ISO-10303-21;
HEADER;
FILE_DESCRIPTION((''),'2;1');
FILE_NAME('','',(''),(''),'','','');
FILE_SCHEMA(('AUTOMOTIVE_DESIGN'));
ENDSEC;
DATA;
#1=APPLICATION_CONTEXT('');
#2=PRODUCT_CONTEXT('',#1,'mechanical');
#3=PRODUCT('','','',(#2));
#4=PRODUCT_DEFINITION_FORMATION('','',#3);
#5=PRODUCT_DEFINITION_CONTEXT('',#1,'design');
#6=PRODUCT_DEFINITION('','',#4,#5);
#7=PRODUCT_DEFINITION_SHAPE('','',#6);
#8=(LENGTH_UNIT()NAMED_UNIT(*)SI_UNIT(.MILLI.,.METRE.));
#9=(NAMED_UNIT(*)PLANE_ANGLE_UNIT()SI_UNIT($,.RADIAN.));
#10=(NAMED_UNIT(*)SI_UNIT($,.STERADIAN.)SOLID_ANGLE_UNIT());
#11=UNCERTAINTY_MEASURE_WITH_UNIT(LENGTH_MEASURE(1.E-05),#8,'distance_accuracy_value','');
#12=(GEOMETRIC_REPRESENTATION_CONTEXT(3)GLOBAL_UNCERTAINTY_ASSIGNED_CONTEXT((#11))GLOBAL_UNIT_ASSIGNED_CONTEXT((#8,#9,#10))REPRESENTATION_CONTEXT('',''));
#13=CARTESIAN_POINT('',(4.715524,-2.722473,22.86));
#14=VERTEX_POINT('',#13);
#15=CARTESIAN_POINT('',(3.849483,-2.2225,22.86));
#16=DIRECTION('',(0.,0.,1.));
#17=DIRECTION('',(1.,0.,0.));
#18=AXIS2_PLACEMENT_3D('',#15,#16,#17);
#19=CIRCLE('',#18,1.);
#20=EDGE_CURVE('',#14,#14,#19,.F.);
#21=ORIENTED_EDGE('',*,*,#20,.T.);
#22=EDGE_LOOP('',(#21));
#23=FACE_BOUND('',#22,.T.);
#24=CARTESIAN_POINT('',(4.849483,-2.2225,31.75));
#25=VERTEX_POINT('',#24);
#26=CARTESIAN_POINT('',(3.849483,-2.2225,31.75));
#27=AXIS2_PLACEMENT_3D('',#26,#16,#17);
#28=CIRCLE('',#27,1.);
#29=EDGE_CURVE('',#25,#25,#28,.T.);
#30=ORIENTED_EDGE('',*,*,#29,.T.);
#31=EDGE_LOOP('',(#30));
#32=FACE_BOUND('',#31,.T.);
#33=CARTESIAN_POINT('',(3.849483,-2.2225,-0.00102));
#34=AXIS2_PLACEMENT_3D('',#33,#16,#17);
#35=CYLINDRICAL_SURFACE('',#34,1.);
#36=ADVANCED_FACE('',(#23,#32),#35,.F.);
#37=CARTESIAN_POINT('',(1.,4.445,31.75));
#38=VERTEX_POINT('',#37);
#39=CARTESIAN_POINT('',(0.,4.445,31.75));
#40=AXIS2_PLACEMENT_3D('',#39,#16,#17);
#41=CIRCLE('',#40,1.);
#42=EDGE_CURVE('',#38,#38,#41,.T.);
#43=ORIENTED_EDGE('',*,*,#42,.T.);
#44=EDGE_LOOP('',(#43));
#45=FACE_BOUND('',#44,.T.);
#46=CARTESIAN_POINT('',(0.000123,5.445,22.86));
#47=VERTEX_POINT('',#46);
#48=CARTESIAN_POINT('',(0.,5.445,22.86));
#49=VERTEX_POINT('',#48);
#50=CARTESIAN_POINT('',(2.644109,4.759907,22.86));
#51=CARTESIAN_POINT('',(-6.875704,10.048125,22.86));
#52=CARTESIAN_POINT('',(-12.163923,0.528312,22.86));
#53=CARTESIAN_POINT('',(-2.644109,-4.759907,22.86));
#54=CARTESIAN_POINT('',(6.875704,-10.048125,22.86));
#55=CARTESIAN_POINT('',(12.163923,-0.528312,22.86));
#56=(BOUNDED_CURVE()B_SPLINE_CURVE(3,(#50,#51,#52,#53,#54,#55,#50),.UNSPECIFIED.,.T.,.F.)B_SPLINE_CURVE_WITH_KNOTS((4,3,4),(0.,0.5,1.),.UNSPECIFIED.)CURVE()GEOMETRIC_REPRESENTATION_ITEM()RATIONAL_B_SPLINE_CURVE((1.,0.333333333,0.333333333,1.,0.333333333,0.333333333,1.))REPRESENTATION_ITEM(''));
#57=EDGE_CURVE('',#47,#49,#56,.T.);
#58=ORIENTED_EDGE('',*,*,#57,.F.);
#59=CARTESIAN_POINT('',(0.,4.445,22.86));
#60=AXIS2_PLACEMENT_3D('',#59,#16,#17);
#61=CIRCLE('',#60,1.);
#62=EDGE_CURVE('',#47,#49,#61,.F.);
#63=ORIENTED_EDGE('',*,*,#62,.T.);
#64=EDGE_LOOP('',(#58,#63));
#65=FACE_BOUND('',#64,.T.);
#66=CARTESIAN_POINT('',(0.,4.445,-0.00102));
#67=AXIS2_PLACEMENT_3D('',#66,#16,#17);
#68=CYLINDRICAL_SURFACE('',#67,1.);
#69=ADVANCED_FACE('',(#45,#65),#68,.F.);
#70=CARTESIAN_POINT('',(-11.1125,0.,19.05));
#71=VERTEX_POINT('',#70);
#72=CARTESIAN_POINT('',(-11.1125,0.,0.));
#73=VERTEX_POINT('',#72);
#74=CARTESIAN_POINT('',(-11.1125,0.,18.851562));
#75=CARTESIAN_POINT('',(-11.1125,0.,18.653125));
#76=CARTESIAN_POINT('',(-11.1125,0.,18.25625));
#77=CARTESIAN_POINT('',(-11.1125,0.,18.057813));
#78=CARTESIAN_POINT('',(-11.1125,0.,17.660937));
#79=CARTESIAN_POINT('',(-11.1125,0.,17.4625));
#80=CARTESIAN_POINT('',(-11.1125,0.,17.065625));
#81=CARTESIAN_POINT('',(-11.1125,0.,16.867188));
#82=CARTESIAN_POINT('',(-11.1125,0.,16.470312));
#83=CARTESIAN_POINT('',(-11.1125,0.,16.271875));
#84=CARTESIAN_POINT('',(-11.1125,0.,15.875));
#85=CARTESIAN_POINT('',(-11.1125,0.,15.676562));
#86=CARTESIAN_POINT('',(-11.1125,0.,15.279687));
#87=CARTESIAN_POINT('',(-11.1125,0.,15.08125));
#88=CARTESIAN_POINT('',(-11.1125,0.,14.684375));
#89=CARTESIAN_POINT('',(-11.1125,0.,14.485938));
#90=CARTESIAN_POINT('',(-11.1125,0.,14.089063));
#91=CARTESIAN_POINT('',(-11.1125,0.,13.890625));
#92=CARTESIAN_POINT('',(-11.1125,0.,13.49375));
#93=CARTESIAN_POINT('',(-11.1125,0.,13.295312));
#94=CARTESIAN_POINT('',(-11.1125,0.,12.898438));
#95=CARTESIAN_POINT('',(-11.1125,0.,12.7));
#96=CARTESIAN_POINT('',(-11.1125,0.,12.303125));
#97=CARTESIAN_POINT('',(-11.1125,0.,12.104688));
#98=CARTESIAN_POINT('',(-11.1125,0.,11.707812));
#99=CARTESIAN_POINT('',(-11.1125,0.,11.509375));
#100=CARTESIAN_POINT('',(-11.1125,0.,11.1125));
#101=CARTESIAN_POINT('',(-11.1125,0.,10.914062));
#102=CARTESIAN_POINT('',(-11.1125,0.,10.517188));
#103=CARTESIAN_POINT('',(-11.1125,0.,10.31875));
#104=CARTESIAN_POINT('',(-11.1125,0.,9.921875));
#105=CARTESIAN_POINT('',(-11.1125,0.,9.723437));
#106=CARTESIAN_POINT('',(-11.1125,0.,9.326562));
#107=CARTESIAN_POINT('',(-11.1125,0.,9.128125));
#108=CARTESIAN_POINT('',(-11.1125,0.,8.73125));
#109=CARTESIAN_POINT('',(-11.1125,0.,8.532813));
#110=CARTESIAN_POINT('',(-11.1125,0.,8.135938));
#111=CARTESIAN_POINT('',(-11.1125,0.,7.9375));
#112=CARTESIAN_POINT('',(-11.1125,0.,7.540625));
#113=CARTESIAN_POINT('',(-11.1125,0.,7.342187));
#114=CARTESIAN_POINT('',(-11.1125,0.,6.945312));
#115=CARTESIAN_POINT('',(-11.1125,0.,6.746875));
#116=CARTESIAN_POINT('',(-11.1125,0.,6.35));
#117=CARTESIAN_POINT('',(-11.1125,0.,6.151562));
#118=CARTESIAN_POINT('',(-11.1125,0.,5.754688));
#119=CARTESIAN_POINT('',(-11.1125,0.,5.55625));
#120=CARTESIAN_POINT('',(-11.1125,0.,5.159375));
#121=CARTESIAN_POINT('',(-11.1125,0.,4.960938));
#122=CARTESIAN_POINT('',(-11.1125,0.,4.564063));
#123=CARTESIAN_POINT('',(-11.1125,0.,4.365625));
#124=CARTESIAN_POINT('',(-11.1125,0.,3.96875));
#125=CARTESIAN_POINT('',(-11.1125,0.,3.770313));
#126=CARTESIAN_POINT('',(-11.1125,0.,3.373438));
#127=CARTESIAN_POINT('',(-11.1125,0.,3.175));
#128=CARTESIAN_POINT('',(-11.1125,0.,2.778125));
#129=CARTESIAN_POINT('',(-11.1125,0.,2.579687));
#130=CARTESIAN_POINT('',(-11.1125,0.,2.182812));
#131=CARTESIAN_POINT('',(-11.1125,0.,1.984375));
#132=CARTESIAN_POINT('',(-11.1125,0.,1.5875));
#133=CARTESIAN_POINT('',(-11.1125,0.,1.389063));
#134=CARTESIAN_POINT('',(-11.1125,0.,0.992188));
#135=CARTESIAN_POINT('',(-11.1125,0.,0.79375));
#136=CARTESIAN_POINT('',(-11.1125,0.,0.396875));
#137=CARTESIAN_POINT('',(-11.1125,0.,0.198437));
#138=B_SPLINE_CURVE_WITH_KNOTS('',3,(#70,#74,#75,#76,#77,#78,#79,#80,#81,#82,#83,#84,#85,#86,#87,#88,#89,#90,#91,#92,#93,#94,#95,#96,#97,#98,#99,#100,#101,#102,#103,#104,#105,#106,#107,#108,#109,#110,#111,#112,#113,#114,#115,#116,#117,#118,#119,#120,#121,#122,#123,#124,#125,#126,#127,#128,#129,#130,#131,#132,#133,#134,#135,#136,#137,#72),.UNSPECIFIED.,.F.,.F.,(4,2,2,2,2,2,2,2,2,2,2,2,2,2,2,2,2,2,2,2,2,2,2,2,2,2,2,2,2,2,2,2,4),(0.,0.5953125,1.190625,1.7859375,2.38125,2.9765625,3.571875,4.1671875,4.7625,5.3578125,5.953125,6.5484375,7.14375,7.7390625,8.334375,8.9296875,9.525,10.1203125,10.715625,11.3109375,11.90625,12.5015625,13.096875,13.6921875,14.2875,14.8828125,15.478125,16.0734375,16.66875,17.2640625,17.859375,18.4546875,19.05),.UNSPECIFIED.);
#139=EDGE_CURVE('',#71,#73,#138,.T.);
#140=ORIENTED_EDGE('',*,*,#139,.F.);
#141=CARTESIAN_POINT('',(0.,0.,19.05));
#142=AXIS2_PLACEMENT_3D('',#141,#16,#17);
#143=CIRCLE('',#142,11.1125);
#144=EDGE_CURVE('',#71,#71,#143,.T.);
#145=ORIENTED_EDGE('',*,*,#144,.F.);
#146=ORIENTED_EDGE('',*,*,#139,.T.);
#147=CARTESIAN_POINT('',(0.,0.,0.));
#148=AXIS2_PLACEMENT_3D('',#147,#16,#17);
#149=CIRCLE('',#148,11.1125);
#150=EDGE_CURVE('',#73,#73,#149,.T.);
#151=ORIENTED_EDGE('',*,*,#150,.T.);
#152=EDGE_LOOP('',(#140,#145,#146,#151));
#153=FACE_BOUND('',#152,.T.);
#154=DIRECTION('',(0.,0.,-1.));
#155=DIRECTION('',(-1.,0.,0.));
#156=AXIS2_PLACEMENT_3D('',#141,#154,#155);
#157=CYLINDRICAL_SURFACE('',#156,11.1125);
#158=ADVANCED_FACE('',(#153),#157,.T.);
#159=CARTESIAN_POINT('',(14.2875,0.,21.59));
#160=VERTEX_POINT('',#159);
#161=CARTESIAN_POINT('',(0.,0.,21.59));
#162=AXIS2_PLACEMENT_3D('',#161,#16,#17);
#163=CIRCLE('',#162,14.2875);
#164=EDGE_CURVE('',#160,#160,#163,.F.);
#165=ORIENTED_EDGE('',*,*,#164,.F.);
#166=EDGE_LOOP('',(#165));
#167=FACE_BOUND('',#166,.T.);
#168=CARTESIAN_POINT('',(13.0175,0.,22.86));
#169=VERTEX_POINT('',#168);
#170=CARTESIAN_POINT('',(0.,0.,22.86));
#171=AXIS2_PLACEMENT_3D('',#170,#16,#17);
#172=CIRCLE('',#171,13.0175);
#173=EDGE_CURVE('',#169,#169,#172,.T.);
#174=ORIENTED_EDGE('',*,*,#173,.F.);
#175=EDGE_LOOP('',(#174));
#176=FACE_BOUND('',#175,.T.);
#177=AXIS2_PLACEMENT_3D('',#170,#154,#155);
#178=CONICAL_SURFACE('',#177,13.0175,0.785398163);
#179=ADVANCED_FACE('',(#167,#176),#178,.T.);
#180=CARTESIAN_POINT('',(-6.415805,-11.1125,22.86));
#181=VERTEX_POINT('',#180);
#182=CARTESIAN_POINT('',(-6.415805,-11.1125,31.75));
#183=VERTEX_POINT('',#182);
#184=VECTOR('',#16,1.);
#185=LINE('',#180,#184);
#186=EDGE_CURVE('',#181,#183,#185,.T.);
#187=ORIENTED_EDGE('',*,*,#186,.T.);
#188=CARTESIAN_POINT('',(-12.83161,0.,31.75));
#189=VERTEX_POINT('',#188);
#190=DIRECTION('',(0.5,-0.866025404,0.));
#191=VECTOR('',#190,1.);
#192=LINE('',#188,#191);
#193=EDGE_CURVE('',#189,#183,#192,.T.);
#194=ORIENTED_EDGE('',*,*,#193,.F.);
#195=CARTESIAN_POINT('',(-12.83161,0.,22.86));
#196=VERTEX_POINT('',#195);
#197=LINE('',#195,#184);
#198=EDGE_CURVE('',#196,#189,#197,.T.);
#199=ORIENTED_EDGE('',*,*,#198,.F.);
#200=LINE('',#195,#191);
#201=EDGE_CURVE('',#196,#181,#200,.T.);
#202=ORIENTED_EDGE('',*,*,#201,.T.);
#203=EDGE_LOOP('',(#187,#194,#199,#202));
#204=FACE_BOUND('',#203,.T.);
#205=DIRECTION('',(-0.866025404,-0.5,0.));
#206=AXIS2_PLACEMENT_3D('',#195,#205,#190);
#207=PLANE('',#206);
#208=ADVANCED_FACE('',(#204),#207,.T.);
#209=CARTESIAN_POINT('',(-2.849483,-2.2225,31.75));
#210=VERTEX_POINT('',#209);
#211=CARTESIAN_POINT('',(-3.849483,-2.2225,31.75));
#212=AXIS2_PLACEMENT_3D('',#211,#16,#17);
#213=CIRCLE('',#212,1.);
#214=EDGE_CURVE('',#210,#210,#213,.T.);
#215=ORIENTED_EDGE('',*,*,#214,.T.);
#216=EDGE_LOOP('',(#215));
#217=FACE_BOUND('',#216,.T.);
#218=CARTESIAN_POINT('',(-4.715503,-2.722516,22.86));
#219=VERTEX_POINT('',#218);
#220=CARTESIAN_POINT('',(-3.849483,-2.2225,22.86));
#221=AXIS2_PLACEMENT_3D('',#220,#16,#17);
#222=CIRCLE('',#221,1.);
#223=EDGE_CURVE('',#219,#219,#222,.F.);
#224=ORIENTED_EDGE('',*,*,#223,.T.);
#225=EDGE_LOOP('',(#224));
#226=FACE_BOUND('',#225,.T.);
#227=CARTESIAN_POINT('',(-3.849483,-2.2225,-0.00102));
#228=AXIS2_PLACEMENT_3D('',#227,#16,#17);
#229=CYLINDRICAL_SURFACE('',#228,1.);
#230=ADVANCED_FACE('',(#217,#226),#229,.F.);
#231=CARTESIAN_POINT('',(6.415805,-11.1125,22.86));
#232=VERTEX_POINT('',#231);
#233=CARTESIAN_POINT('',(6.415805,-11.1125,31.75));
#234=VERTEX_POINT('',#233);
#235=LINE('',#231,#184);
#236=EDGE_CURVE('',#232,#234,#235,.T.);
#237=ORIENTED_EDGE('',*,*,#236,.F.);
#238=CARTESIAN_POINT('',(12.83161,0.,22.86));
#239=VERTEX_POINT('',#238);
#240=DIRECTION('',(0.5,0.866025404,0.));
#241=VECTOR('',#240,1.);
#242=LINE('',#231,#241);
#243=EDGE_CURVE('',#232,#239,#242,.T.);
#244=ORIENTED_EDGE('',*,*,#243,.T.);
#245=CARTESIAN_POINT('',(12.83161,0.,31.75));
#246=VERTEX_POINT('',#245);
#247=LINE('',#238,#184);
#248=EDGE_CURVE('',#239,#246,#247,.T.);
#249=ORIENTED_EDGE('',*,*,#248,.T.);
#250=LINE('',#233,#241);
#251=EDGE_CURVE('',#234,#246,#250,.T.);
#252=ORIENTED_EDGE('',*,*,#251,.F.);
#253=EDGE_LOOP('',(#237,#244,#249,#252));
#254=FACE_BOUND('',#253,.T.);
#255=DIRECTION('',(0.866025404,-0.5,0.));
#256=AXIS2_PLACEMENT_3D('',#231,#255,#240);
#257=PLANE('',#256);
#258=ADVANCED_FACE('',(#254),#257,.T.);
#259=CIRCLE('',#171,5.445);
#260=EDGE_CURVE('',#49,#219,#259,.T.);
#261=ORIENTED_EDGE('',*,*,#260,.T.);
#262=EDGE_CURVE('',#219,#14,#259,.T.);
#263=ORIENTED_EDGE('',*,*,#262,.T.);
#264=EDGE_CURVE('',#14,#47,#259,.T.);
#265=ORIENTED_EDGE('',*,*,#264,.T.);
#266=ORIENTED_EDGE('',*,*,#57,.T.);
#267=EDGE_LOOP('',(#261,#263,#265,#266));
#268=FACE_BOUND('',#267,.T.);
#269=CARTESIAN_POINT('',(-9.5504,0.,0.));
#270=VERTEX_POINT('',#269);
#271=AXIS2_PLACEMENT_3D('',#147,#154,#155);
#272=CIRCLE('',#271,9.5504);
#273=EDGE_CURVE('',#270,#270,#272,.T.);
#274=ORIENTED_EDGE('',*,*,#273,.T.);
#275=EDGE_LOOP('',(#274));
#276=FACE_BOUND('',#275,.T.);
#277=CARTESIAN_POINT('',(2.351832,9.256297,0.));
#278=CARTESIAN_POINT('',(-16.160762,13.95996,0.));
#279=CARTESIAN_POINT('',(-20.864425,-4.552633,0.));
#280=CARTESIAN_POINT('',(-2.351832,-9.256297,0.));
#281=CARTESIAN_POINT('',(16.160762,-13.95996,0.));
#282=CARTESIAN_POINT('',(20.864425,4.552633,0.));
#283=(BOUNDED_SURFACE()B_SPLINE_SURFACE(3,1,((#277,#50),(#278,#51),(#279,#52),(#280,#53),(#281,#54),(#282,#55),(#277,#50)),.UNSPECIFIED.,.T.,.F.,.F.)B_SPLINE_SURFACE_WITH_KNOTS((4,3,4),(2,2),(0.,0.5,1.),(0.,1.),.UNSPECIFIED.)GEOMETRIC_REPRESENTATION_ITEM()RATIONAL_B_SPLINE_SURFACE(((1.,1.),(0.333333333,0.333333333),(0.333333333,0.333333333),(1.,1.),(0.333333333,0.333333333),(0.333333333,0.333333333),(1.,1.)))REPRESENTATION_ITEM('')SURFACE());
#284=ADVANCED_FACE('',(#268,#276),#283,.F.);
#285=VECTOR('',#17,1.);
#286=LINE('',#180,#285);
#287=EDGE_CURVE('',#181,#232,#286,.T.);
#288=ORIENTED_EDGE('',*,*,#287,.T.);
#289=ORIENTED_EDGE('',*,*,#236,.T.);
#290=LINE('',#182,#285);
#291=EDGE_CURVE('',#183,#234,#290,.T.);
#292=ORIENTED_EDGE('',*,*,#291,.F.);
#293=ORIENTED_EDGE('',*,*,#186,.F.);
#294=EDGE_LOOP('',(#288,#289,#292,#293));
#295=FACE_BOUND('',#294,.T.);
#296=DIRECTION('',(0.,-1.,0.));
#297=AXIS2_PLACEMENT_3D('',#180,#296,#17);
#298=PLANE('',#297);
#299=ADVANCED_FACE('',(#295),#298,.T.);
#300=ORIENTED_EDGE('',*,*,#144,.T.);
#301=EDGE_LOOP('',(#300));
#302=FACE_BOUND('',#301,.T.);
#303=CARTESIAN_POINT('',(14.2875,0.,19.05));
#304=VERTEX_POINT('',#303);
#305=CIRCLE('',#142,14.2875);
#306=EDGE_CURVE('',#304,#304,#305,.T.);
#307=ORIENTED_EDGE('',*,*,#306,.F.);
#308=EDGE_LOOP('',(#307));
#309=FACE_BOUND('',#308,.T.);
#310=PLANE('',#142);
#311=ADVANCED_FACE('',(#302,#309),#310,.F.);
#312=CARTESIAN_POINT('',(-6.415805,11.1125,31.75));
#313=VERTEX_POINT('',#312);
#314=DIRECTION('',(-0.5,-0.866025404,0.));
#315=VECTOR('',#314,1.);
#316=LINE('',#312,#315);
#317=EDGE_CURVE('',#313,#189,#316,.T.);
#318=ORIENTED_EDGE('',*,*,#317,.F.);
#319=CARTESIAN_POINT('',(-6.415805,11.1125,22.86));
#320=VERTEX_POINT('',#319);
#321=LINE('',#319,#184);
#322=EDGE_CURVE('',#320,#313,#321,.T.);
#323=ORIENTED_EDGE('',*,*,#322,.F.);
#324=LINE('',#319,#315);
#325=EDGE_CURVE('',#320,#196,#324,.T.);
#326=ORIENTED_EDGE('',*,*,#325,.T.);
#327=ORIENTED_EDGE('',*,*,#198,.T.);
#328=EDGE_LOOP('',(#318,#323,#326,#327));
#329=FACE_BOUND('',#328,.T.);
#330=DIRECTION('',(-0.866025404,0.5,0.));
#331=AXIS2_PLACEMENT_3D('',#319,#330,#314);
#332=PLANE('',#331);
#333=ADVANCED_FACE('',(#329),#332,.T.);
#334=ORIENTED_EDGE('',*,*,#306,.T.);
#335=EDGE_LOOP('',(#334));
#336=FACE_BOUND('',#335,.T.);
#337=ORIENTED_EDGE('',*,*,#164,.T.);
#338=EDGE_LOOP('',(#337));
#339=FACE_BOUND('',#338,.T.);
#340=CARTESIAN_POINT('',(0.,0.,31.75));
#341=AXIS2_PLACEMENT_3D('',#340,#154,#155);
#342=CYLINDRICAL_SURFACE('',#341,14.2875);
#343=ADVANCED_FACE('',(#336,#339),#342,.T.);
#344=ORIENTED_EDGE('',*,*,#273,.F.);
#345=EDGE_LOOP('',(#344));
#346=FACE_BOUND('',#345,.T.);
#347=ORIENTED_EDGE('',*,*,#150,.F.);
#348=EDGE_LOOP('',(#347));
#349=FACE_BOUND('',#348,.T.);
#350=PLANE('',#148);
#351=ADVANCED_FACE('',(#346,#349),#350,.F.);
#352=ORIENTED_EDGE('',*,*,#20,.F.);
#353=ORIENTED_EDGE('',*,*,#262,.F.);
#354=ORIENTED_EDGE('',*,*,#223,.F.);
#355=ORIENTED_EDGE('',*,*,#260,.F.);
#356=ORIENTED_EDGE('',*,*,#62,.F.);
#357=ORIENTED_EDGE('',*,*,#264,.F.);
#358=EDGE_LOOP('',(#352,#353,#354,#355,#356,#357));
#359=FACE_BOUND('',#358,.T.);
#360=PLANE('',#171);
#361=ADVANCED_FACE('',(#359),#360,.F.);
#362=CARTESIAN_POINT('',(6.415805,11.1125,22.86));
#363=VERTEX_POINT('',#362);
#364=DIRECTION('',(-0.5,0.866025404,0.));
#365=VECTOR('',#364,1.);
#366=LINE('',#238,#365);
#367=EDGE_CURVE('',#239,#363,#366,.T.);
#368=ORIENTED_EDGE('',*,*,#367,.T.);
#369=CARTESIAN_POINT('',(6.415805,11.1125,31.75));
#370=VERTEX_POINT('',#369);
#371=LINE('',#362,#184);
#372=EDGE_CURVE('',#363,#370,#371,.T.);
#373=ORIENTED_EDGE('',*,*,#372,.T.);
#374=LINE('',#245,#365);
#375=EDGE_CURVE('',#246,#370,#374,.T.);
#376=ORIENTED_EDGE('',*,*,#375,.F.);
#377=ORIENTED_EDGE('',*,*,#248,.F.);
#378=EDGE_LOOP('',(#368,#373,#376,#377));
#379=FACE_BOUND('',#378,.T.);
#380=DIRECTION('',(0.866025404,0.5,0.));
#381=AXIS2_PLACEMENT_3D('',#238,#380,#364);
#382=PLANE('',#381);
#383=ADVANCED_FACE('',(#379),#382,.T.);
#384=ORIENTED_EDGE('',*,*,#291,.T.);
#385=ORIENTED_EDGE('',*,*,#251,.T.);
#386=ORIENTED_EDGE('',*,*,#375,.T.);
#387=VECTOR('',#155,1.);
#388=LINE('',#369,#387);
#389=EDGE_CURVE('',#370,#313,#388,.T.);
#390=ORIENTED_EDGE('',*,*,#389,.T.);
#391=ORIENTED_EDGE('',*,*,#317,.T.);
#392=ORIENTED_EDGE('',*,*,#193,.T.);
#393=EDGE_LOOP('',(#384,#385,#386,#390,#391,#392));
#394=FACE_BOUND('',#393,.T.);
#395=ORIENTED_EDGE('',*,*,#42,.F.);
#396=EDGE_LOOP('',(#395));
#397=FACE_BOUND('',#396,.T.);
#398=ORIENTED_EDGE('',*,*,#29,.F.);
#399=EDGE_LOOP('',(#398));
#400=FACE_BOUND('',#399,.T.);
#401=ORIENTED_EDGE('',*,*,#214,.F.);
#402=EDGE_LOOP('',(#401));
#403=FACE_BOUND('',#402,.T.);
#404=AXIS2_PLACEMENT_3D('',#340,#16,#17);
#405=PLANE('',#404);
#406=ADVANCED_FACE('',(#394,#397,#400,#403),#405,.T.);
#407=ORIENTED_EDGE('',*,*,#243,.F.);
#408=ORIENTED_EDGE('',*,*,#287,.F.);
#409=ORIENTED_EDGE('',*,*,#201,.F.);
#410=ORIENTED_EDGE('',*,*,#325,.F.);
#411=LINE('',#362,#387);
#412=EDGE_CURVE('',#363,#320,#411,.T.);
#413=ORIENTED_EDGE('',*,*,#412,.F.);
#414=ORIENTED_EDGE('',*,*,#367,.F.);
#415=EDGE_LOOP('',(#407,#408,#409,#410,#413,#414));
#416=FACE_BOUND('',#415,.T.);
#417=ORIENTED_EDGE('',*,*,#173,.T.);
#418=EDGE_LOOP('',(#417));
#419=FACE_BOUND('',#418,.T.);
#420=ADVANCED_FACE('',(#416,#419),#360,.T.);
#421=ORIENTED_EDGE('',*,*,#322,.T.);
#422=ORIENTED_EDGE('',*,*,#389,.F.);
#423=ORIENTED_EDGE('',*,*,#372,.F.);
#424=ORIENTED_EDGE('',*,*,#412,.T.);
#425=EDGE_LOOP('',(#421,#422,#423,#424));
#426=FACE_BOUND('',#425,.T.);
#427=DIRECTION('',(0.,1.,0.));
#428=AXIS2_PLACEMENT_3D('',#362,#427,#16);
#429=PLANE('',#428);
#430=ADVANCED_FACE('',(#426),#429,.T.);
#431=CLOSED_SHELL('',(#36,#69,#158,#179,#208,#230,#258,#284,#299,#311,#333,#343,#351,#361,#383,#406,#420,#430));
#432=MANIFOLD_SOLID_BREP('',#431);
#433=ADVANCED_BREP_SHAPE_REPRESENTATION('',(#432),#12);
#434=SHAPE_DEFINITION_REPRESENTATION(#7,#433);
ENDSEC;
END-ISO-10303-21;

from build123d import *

# Parameters (mm, degrees)
SKETCH1_R           = 11.1125
BOSS_EXTRUDE1_DEPTH = 19.05
SKETCH2_R           = 14.2875
BOSS_EXTRUDE2_DEPTH = 12.7
CUT_EXTRUDE1_START  = -8.89
SKETCH3_R           = 14.2875
CUT_EXTRUDE1_DEPTH  = 8.89
CHAMFER1_SIZE       = 1.27
CUT_EXTRUDE2_REACH  = 39.634
SKETCH4_R           = 1


with BuildPart() as part:
    # Sketch1 → Boss-Extrude1 (new body)
    with BuildSketch(Plane.XY):
        with Locations(Location((0, 0, 0), (0, 0, 180))):
            Circle(SKETCH1_R)
    extrude(amount=BOSS_EXTRUDE1_DEPTH)

    # Sketch2 → Boss-Extrude2 (add)
    with BuildSketch(Plane.XY.offset(19.05)):
        Circle(SKETCH2_R)
    extrude(amount=BOSS_EXTRUDE2_DEPTH)

    # Sketch3 → Cut-Extrude1 (cut)
    with BuildSketch(Plane.XY.offset(31.75).offset(CUT_EXTRUDE1_START)):
        Circle(SKETCH3_R)
        Polygon((12.831609733, 0), (6.415804866, 11.1125), (-6.415804866, 11.1125), (-12.831609733, 0), (-6.415804866, -11.1125), (6.415804866, -11.1125), align=None, mode=Mode.SUBTRACT)
    extrude(amount=CUT_EXTRUDE1_DEPTH, mode=Mode.SUBTRACT)

    # Chamfer1
    chamfer1_edges = [part.edges().sort_by_distance(p)[0] for p in [
        (-14.2875, 0, 22.86),
    ]]
    chamfer(chamfer1_edges, length=CHAMFER1_SIZE)

    # Cut-Loft1: read off the stored shape, not the designer's step
    # Cut-Loft1: loft between two sections, ruled curve by curve
    cut_loft1_from = [
        Edge.make_bspline([(2.35183174, 9.256296648, 0), (-16.160761555, 13.959960127, 0), (-20.864425035, -4.552633168, 0), (-2.35183174, -9.256296648, 0), (16.160761555, -13.959960127, 0), (20.864425035, 4.552633168, 0), (2.35183174, 9.256296648, 0)], [0, 0, 0, 0, 0.5, 0.5, 0.5, 1, 1, 1, 1], 3, [1, 0.333333333, 0.333333333, 1, 0.333333333, 0.333333333, 1]),
    ]
    cut_loft1_to = [
        Edge.make_bspline([(2.644109425, 4.759906548, 22.86), (-6.875703672, 10.048125398, 22.86), (-12.163922522, 0.528312301, 22.86), (-2.644109425, -4.759906548, 22.86), (6.875703672, -10.048125398, 22.86), (12.163922522, -0.528312301, 22.86), (2.644109425, 4.759906548, 22.86)], [0, 0, 0, 0, 0.5, 0.5, 0.5, 1, 1, 1, 1], 3, [1, 0.333333333, 0.333333333, 1, 0.333333333, 0.333333333, 1]),
    ]
    cut_loft1 = Solid(Shell([*[Face.make_surface_from_curves(cut_loft1_from[k], cut_loft1_to[k]) for k in range(1)], Face(Wire(cut_loft1_from)), Face(Wire(cut_loft1_to))]))
    add(cut_loft1, mode=Mode.SUBTRACT)

    # Sketch4 → Cut-Extrude2 (cut, up to next)
    with BuildSketch(Plane.XY.offset(31.75), mode=Mode.PRIVATE) as cut_extrude2_sk1:
        with Locations((0, 4.445)):
            Circle(SKETCH4_R)
    cut_extrude2_tool1 = extrude(cut_extrude2_sk1.sketch, amount=-CUT_EXTRUDE2_REACH, mode=Mode.PRIVATE) & part.part
    # Sketch4 → Cut-Extrude2 (cut, up to next)
    with BuildSketch(Plane.XY.offset(31.75), mode=Mode.PRIVATE) as cut_extrude2_sk2:
        with Locations((3.84948292, -2.2225)):
            Circle(SKETCH4_R)
    cut_extrude2_tool2 = extrude(cut_extrude2_sk2.sketch, amount=-CUT_EXTRUDE2_REACH, mode=Mode.PRIVATE) & part.part
    # Sketch4 → Cut-Extrude2 (cut, up to next)
    with BuildSketch(Plane.XY.offset(31.75), mode=Mode.PRIVATE) as cut_extrude2_sk3:
        with Locations((-3.84948292, -2.2225)):
            Circle(SKETCH4_R)
    cut_extrude2_tool3 = extrude(cut_extrude2_sk3.sketch, amount=-CUT_EXTRUDE2_REACH, mode=Mode.PRIVATE) & part.part
    add(cut_extrude2_tool1.solids().sort_by_distance((0, 4.445, 31.75))[0], mode=Mode.SUBTRACT)
    add(cut_extrude2_tool2.solids().sort_by_distance((3.849483, -2.2225, 31.75))[0], mode=Mode.SUBTRACT)
    add(cut_extrude2_tool3.solids().sort_by_distance((-3.849483, -2.2225, 31.75))[0], mode=Mode.SUBTRACT)


solid = part.part
